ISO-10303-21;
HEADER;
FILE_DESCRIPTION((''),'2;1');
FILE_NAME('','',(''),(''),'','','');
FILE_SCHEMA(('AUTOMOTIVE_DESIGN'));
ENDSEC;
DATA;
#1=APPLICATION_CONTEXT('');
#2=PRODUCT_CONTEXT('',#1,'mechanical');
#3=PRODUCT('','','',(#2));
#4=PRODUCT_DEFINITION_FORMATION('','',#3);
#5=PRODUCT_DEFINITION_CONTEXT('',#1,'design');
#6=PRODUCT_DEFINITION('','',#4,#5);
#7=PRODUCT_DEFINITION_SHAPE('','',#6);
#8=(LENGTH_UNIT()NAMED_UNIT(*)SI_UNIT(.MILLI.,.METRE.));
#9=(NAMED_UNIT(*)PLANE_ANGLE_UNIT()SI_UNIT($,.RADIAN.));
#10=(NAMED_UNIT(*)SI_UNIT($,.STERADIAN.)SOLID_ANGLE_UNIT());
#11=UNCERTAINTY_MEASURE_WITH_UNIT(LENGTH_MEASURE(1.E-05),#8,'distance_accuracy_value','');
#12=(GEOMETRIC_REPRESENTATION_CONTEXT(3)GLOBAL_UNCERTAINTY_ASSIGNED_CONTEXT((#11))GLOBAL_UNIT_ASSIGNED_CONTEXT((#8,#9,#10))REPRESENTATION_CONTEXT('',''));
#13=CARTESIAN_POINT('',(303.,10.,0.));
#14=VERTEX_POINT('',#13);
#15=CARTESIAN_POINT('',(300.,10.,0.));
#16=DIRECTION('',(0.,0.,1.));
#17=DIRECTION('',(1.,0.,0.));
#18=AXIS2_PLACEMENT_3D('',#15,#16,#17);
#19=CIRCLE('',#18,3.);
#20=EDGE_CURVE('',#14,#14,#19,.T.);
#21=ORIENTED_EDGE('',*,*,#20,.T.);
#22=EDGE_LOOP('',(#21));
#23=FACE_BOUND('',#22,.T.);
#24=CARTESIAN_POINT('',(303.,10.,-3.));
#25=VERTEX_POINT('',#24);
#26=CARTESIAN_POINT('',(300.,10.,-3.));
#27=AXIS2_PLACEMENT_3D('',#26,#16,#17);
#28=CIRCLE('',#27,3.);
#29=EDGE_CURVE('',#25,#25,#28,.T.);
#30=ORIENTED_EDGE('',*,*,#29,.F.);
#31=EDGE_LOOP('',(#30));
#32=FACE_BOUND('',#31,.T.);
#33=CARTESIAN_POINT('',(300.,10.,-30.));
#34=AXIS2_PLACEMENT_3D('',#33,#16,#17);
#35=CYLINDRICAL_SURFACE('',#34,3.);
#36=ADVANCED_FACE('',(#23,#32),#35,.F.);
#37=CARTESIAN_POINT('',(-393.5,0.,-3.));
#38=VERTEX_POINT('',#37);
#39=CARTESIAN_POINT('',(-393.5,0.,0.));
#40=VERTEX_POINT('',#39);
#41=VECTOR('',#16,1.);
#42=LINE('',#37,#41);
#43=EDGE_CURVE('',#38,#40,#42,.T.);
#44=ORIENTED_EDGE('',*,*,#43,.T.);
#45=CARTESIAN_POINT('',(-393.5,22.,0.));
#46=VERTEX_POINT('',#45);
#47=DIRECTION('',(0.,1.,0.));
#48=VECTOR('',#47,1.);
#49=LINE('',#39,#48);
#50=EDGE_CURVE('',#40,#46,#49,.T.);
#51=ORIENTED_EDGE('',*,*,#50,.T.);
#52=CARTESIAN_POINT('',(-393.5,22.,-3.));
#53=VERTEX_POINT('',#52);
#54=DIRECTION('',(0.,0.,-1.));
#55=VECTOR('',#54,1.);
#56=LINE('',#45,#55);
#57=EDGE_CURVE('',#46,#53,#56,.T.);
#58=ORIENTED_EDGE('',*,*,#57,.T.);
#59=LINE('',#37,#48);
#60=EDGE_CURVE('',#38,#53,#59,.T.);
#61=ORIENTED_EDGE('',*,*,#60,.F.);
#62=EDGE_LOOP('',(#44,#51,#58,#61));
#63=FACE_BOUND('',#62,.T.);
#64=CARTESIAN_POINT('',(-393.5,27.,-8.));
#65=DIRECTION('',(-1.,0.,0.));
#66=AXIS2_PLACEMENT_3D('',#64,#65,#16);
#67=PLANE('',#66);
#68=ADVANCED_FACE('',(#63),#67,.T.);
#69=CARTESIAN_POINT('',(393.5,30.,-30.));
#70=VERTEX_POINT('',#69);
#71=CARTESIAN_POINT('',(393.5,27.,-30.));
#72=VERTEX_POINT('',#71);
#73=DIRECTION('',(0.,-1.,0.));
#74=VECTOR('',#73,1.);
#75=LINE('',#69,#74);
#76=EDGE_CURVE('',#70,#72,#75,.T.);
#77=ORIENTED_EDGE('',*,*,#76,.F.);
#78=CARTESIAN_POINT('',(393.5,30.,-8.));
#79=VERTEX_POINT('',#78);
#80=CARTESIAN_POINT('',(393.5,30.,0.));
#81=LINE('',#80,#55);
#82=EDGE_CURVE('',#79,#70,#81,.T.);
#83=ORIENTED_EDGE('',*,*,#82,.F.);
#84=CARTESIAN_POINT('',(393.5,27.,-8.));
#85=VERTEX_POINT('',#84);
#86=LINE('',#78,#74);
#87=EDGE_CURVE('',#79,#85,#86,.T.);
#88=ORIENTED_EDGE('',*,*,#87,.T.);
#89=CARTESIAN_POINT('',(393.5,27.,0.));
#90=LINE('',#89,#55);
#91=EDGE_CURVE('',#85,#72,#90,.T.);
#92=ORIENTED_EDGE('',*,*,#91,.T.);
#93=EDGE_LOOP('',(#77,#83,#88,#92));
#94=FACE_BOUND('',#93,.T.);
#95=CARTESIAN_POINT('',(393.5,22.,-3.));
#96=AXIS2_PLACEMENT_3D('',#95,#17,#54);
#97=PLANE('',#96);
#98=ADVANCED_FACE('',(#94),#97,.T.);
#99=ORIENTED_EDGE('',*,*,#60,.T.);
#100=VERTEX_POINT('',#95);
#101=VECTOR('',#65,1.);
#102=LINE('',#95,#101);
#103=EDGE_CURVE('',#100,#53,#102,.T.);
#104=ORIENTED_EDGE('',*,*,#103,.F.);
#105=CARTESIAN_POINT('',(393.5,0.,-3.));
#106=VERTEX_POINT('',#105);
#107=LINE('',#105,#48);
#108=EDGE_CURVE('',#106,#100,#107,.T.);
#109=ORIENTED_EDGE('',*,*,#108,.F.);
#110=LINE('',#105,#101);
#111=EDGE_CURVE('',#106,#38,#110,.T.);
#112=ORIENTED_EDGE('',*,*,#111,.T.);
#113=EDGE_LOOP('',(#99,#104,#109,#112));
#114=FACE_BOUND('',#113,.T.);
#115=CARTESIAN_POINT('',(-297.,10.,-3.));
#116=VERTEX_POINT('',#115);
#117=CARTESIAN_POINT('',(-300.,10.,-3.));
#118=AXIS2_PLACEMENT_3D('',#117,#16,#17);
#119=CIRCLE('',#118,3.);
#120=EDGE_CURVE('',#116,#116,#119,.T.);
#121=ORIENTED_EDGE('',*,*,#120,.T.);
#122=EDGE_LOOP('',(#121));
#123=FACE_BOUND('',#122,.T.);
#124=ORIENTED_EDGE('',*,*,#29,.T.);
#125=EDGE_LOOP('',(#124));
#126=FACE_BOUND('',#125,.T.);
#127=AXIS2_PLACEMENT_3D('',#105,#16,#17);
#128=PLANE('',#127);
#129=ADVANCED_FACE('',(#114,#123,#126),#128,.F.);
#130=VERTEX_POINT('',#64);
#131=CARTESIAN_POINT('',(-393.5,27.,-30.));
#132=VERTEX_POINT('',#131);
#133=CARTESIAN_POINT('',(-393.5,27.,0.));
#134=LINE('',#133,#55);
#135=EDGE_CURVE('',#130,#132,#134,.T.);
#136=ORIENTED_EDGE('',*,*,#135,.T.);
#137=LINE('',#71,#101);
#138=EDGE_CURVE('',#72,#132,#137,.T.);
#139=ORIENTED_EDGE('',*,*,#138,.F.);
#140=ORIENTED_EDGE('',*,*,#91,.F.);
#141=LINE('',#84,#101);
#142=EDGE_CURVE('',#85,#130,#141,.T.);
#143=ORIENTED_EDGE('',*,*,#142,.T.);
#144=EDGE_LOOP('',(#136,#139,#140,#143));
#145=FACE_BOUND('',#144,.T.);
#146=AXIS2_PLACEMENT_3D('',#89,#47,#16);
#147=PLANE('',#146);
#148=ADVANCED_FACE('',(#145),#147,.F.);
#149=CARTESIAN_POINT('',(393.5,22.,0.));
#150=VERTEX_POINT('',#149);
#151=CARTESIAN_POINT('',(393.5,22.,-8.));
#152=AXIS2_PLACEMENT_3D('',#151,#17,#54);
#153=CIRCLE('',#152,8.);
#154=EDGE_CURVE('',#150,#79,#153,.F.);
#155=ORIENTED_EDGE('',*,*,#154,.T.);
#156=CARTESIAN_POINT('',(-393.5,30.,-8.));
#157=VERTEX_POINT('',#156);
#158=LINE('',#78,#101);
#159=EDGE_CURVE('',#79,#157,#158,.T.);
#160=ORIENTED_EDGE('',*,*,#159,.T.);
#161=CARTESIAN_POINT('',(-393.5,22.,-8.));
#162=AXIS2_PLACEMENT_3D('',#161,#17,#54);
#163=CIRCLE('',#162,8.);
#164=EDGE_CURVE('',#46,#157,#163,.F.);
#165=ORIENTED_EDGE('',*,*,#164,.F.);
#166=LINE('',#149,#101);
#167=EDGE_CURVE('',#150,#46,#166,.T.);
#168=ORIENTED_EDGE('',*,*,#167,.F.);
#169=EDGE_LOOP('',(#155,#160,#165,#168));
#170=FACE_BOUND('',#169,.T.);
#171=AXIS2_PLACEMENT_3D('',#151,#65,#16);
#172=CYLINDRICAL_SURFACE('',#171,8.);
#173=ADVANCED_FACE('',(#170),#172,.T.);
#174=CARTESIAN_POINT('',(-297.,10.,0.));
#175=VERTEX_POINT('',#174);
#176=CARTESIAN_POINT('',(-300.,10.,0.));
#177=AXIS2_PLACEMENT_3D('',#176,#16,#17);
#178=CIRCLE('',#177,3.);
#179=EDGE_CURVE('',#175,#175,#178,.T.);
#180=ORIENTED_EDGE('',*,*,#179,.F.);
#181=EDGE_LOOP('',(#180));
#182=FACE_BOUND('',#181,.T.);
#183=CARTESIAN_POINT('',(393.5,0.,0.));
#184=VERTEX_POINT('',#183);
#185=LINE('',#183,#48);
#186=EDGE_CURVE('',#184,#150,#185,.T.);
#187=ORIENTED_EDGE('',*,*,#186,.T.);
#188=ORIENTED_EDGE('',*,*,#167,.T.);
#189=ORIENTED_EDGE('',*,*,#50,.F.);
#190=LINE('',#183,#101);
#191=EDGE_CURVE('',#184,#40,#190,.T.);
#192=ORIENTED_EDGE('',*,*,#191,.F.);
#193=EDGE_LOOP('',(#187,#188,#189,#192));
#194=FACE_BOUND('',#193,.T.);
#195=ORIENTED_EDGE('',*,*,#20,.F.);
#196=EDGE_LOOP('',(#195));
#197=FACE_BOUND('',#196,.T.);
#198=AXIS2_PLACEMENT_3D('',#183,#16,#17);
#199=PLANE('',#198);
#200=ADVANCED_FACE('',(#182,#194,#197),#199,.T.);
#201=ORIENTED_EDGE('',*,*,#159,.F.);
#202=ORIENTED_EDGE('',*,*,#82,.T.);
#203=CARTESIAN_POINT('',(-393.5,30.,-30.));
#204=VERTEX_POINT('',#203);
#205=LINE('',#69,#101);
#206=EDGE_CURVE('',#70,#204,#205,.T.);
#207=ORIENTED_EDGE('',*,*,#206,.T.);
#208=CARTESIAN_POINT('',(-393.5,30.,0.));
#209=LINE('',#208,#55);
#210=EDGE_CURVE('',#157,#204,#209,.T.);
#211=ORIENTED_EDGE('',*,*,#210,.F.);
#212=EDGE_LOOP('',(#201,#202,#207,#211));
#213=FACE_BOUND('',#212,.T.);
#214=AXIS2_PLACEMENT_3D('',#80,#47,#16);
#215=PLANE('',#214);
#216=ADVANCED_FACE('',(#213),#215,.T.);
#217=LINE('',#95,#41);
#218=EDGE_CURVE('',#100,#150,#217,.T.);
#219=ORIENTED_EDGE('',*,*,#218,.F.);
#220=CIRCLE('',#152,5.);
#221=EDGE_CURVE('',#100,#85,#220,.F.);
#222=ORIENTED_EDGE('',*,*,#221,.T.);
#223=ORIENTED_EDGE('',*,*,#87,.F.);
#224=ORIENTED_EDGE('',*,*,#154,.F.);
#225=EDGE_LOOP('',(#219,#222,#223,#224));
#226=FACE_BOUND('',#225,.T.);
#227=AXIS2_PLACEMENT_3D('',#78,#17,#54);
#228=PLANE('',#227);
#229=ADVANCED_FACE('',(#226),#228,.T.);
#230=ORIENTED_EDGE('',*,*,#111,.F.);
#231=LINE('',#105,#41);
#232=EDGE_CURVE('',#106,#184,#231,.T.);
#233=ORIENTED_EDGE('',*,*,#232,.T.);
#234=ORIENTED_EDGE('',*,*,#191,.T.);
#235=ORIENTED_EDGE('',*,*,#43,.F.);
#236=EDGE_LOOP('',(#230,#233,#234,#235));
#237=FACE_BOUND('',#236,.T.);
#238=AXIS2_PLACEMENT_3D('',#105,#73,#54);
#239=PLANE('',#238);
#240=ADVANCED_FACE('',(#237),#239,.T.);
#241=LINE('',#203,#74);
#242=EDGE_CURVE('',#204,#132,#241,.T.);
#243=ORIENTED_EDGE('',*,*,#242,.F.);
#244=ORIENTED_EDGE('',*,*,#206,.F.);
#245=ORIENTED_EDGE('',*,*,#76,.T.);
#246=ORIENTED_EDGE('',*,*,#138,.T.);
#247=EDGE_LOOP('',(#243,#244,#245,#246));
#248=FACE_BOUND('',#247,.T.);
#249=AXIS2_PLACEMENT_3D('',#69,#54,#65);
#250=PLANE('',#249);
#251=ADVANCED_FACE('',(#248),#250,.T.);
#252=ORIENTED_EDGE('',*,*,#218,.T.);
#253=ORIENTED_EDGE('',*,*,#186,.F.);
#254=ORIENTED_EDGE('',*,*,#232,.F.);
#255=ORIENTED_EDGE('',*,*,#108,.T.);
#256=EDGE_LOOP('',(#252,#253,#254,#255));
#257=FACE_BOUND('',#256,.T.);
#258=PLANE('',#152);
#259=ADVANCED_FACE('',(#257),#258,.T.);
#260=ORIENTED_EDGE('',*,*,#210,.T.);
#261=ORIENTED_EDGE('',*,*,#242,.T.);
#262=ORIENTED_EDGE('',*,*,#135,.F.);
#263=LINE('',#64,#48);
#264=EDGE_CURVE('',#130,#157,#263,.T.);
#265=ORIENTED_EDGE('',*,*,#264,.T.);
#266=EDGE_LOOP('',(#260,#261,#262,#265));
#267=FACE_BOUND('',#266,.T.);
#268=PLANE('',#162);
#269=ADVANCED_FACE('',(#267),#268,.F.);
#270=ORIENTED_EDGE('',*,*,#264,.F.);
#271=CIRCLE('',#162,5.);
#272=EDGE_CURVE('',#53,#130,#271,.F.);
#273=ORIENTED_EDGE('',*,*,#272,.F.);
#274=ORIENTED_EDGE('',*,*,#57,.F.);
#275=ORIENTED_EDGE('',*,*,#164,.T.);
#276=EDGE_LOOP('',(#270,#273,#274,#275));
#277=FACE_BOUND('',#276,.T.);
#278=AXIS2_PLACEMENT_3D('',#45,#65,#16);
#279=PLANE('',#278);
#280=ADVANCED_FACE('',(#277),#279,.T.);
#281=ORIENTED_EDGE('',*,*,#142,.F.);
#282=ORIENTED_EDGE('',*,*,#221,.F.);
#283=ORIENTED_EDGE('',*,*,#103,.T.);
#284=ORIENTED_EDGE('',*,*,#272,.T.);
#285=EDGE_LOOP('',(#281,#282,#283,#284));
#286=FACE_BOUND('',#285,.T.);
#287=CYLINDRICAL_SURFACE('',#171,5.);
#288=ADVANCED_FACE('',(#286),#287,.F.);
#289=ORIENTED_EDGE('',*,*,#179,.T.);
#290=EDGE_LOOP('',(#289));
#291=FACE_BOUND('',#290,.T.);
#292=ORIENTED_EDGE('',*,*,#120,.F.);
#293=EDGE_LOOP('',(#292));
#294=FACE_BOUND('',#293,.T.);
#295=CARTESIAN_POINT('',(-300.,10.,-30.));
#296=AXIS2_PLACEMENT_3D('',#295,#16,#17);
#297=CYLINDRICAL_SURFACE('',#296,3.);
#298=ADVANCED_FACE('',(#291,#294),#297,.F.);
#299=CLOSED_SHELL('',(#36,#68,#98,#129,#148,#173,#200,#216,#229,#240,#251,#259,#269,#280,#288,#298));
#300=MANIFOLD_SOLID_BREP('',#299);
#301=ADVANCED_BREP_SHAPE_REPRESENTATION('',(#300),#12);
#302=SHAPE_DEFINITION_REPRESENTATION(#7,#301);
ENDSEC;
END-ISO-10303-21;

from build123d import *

# Parameters (mm, degrees)
SM_BASE_FLANGE_1_DEPTH = 393.5
SKETCH_3_R             = 3
CUT_EXTRUDE_1_DEPTH    = 396.780557885


# Sheet-metal steps are written as plain solids
with BuildPart() as part:
    # Sketch 1 → Базовая кромка1 (new, symmetric)
    with BuildSketch(Plane(origin=(0, 0, 0), x_dir=(0, 0, -1), z_dir=(1, 0, 0))):
        with BuildLine():
            Line((0, 0), (0, 22))
            ThreePointArc((0, 22), (2.343145751, 27.656854249), (8, 30))
            Line((8, 30), (30, 30))
            Line((30, 30), (30, 27))
            Line((30, 27), (8, 27))
            ThreePointArc((8, 27), (4.464466094, 25.535533906), (3, 22))
            Line((3, 22), (3, 0))
            Line((3, 0), (0, 0))
        make_face()
    extrude(amount=SM_BASE_FLANGE_1_DEPTH, both=True)

    # Эскиз3 → Вырез-Вытянуть1 (cut, through all)
    with BuildSketch(Plane.XY):
        with Locations((300, 10)):
            Circle(SKETCH_3_R)
        with Locations((-300, 10)):
            Circle(SKETCH_3_R)
    extrude(amount=-CUT_EXTRUDE_1_DEPTH, mode=Mode.SUBTRACT)


solid = part.part
